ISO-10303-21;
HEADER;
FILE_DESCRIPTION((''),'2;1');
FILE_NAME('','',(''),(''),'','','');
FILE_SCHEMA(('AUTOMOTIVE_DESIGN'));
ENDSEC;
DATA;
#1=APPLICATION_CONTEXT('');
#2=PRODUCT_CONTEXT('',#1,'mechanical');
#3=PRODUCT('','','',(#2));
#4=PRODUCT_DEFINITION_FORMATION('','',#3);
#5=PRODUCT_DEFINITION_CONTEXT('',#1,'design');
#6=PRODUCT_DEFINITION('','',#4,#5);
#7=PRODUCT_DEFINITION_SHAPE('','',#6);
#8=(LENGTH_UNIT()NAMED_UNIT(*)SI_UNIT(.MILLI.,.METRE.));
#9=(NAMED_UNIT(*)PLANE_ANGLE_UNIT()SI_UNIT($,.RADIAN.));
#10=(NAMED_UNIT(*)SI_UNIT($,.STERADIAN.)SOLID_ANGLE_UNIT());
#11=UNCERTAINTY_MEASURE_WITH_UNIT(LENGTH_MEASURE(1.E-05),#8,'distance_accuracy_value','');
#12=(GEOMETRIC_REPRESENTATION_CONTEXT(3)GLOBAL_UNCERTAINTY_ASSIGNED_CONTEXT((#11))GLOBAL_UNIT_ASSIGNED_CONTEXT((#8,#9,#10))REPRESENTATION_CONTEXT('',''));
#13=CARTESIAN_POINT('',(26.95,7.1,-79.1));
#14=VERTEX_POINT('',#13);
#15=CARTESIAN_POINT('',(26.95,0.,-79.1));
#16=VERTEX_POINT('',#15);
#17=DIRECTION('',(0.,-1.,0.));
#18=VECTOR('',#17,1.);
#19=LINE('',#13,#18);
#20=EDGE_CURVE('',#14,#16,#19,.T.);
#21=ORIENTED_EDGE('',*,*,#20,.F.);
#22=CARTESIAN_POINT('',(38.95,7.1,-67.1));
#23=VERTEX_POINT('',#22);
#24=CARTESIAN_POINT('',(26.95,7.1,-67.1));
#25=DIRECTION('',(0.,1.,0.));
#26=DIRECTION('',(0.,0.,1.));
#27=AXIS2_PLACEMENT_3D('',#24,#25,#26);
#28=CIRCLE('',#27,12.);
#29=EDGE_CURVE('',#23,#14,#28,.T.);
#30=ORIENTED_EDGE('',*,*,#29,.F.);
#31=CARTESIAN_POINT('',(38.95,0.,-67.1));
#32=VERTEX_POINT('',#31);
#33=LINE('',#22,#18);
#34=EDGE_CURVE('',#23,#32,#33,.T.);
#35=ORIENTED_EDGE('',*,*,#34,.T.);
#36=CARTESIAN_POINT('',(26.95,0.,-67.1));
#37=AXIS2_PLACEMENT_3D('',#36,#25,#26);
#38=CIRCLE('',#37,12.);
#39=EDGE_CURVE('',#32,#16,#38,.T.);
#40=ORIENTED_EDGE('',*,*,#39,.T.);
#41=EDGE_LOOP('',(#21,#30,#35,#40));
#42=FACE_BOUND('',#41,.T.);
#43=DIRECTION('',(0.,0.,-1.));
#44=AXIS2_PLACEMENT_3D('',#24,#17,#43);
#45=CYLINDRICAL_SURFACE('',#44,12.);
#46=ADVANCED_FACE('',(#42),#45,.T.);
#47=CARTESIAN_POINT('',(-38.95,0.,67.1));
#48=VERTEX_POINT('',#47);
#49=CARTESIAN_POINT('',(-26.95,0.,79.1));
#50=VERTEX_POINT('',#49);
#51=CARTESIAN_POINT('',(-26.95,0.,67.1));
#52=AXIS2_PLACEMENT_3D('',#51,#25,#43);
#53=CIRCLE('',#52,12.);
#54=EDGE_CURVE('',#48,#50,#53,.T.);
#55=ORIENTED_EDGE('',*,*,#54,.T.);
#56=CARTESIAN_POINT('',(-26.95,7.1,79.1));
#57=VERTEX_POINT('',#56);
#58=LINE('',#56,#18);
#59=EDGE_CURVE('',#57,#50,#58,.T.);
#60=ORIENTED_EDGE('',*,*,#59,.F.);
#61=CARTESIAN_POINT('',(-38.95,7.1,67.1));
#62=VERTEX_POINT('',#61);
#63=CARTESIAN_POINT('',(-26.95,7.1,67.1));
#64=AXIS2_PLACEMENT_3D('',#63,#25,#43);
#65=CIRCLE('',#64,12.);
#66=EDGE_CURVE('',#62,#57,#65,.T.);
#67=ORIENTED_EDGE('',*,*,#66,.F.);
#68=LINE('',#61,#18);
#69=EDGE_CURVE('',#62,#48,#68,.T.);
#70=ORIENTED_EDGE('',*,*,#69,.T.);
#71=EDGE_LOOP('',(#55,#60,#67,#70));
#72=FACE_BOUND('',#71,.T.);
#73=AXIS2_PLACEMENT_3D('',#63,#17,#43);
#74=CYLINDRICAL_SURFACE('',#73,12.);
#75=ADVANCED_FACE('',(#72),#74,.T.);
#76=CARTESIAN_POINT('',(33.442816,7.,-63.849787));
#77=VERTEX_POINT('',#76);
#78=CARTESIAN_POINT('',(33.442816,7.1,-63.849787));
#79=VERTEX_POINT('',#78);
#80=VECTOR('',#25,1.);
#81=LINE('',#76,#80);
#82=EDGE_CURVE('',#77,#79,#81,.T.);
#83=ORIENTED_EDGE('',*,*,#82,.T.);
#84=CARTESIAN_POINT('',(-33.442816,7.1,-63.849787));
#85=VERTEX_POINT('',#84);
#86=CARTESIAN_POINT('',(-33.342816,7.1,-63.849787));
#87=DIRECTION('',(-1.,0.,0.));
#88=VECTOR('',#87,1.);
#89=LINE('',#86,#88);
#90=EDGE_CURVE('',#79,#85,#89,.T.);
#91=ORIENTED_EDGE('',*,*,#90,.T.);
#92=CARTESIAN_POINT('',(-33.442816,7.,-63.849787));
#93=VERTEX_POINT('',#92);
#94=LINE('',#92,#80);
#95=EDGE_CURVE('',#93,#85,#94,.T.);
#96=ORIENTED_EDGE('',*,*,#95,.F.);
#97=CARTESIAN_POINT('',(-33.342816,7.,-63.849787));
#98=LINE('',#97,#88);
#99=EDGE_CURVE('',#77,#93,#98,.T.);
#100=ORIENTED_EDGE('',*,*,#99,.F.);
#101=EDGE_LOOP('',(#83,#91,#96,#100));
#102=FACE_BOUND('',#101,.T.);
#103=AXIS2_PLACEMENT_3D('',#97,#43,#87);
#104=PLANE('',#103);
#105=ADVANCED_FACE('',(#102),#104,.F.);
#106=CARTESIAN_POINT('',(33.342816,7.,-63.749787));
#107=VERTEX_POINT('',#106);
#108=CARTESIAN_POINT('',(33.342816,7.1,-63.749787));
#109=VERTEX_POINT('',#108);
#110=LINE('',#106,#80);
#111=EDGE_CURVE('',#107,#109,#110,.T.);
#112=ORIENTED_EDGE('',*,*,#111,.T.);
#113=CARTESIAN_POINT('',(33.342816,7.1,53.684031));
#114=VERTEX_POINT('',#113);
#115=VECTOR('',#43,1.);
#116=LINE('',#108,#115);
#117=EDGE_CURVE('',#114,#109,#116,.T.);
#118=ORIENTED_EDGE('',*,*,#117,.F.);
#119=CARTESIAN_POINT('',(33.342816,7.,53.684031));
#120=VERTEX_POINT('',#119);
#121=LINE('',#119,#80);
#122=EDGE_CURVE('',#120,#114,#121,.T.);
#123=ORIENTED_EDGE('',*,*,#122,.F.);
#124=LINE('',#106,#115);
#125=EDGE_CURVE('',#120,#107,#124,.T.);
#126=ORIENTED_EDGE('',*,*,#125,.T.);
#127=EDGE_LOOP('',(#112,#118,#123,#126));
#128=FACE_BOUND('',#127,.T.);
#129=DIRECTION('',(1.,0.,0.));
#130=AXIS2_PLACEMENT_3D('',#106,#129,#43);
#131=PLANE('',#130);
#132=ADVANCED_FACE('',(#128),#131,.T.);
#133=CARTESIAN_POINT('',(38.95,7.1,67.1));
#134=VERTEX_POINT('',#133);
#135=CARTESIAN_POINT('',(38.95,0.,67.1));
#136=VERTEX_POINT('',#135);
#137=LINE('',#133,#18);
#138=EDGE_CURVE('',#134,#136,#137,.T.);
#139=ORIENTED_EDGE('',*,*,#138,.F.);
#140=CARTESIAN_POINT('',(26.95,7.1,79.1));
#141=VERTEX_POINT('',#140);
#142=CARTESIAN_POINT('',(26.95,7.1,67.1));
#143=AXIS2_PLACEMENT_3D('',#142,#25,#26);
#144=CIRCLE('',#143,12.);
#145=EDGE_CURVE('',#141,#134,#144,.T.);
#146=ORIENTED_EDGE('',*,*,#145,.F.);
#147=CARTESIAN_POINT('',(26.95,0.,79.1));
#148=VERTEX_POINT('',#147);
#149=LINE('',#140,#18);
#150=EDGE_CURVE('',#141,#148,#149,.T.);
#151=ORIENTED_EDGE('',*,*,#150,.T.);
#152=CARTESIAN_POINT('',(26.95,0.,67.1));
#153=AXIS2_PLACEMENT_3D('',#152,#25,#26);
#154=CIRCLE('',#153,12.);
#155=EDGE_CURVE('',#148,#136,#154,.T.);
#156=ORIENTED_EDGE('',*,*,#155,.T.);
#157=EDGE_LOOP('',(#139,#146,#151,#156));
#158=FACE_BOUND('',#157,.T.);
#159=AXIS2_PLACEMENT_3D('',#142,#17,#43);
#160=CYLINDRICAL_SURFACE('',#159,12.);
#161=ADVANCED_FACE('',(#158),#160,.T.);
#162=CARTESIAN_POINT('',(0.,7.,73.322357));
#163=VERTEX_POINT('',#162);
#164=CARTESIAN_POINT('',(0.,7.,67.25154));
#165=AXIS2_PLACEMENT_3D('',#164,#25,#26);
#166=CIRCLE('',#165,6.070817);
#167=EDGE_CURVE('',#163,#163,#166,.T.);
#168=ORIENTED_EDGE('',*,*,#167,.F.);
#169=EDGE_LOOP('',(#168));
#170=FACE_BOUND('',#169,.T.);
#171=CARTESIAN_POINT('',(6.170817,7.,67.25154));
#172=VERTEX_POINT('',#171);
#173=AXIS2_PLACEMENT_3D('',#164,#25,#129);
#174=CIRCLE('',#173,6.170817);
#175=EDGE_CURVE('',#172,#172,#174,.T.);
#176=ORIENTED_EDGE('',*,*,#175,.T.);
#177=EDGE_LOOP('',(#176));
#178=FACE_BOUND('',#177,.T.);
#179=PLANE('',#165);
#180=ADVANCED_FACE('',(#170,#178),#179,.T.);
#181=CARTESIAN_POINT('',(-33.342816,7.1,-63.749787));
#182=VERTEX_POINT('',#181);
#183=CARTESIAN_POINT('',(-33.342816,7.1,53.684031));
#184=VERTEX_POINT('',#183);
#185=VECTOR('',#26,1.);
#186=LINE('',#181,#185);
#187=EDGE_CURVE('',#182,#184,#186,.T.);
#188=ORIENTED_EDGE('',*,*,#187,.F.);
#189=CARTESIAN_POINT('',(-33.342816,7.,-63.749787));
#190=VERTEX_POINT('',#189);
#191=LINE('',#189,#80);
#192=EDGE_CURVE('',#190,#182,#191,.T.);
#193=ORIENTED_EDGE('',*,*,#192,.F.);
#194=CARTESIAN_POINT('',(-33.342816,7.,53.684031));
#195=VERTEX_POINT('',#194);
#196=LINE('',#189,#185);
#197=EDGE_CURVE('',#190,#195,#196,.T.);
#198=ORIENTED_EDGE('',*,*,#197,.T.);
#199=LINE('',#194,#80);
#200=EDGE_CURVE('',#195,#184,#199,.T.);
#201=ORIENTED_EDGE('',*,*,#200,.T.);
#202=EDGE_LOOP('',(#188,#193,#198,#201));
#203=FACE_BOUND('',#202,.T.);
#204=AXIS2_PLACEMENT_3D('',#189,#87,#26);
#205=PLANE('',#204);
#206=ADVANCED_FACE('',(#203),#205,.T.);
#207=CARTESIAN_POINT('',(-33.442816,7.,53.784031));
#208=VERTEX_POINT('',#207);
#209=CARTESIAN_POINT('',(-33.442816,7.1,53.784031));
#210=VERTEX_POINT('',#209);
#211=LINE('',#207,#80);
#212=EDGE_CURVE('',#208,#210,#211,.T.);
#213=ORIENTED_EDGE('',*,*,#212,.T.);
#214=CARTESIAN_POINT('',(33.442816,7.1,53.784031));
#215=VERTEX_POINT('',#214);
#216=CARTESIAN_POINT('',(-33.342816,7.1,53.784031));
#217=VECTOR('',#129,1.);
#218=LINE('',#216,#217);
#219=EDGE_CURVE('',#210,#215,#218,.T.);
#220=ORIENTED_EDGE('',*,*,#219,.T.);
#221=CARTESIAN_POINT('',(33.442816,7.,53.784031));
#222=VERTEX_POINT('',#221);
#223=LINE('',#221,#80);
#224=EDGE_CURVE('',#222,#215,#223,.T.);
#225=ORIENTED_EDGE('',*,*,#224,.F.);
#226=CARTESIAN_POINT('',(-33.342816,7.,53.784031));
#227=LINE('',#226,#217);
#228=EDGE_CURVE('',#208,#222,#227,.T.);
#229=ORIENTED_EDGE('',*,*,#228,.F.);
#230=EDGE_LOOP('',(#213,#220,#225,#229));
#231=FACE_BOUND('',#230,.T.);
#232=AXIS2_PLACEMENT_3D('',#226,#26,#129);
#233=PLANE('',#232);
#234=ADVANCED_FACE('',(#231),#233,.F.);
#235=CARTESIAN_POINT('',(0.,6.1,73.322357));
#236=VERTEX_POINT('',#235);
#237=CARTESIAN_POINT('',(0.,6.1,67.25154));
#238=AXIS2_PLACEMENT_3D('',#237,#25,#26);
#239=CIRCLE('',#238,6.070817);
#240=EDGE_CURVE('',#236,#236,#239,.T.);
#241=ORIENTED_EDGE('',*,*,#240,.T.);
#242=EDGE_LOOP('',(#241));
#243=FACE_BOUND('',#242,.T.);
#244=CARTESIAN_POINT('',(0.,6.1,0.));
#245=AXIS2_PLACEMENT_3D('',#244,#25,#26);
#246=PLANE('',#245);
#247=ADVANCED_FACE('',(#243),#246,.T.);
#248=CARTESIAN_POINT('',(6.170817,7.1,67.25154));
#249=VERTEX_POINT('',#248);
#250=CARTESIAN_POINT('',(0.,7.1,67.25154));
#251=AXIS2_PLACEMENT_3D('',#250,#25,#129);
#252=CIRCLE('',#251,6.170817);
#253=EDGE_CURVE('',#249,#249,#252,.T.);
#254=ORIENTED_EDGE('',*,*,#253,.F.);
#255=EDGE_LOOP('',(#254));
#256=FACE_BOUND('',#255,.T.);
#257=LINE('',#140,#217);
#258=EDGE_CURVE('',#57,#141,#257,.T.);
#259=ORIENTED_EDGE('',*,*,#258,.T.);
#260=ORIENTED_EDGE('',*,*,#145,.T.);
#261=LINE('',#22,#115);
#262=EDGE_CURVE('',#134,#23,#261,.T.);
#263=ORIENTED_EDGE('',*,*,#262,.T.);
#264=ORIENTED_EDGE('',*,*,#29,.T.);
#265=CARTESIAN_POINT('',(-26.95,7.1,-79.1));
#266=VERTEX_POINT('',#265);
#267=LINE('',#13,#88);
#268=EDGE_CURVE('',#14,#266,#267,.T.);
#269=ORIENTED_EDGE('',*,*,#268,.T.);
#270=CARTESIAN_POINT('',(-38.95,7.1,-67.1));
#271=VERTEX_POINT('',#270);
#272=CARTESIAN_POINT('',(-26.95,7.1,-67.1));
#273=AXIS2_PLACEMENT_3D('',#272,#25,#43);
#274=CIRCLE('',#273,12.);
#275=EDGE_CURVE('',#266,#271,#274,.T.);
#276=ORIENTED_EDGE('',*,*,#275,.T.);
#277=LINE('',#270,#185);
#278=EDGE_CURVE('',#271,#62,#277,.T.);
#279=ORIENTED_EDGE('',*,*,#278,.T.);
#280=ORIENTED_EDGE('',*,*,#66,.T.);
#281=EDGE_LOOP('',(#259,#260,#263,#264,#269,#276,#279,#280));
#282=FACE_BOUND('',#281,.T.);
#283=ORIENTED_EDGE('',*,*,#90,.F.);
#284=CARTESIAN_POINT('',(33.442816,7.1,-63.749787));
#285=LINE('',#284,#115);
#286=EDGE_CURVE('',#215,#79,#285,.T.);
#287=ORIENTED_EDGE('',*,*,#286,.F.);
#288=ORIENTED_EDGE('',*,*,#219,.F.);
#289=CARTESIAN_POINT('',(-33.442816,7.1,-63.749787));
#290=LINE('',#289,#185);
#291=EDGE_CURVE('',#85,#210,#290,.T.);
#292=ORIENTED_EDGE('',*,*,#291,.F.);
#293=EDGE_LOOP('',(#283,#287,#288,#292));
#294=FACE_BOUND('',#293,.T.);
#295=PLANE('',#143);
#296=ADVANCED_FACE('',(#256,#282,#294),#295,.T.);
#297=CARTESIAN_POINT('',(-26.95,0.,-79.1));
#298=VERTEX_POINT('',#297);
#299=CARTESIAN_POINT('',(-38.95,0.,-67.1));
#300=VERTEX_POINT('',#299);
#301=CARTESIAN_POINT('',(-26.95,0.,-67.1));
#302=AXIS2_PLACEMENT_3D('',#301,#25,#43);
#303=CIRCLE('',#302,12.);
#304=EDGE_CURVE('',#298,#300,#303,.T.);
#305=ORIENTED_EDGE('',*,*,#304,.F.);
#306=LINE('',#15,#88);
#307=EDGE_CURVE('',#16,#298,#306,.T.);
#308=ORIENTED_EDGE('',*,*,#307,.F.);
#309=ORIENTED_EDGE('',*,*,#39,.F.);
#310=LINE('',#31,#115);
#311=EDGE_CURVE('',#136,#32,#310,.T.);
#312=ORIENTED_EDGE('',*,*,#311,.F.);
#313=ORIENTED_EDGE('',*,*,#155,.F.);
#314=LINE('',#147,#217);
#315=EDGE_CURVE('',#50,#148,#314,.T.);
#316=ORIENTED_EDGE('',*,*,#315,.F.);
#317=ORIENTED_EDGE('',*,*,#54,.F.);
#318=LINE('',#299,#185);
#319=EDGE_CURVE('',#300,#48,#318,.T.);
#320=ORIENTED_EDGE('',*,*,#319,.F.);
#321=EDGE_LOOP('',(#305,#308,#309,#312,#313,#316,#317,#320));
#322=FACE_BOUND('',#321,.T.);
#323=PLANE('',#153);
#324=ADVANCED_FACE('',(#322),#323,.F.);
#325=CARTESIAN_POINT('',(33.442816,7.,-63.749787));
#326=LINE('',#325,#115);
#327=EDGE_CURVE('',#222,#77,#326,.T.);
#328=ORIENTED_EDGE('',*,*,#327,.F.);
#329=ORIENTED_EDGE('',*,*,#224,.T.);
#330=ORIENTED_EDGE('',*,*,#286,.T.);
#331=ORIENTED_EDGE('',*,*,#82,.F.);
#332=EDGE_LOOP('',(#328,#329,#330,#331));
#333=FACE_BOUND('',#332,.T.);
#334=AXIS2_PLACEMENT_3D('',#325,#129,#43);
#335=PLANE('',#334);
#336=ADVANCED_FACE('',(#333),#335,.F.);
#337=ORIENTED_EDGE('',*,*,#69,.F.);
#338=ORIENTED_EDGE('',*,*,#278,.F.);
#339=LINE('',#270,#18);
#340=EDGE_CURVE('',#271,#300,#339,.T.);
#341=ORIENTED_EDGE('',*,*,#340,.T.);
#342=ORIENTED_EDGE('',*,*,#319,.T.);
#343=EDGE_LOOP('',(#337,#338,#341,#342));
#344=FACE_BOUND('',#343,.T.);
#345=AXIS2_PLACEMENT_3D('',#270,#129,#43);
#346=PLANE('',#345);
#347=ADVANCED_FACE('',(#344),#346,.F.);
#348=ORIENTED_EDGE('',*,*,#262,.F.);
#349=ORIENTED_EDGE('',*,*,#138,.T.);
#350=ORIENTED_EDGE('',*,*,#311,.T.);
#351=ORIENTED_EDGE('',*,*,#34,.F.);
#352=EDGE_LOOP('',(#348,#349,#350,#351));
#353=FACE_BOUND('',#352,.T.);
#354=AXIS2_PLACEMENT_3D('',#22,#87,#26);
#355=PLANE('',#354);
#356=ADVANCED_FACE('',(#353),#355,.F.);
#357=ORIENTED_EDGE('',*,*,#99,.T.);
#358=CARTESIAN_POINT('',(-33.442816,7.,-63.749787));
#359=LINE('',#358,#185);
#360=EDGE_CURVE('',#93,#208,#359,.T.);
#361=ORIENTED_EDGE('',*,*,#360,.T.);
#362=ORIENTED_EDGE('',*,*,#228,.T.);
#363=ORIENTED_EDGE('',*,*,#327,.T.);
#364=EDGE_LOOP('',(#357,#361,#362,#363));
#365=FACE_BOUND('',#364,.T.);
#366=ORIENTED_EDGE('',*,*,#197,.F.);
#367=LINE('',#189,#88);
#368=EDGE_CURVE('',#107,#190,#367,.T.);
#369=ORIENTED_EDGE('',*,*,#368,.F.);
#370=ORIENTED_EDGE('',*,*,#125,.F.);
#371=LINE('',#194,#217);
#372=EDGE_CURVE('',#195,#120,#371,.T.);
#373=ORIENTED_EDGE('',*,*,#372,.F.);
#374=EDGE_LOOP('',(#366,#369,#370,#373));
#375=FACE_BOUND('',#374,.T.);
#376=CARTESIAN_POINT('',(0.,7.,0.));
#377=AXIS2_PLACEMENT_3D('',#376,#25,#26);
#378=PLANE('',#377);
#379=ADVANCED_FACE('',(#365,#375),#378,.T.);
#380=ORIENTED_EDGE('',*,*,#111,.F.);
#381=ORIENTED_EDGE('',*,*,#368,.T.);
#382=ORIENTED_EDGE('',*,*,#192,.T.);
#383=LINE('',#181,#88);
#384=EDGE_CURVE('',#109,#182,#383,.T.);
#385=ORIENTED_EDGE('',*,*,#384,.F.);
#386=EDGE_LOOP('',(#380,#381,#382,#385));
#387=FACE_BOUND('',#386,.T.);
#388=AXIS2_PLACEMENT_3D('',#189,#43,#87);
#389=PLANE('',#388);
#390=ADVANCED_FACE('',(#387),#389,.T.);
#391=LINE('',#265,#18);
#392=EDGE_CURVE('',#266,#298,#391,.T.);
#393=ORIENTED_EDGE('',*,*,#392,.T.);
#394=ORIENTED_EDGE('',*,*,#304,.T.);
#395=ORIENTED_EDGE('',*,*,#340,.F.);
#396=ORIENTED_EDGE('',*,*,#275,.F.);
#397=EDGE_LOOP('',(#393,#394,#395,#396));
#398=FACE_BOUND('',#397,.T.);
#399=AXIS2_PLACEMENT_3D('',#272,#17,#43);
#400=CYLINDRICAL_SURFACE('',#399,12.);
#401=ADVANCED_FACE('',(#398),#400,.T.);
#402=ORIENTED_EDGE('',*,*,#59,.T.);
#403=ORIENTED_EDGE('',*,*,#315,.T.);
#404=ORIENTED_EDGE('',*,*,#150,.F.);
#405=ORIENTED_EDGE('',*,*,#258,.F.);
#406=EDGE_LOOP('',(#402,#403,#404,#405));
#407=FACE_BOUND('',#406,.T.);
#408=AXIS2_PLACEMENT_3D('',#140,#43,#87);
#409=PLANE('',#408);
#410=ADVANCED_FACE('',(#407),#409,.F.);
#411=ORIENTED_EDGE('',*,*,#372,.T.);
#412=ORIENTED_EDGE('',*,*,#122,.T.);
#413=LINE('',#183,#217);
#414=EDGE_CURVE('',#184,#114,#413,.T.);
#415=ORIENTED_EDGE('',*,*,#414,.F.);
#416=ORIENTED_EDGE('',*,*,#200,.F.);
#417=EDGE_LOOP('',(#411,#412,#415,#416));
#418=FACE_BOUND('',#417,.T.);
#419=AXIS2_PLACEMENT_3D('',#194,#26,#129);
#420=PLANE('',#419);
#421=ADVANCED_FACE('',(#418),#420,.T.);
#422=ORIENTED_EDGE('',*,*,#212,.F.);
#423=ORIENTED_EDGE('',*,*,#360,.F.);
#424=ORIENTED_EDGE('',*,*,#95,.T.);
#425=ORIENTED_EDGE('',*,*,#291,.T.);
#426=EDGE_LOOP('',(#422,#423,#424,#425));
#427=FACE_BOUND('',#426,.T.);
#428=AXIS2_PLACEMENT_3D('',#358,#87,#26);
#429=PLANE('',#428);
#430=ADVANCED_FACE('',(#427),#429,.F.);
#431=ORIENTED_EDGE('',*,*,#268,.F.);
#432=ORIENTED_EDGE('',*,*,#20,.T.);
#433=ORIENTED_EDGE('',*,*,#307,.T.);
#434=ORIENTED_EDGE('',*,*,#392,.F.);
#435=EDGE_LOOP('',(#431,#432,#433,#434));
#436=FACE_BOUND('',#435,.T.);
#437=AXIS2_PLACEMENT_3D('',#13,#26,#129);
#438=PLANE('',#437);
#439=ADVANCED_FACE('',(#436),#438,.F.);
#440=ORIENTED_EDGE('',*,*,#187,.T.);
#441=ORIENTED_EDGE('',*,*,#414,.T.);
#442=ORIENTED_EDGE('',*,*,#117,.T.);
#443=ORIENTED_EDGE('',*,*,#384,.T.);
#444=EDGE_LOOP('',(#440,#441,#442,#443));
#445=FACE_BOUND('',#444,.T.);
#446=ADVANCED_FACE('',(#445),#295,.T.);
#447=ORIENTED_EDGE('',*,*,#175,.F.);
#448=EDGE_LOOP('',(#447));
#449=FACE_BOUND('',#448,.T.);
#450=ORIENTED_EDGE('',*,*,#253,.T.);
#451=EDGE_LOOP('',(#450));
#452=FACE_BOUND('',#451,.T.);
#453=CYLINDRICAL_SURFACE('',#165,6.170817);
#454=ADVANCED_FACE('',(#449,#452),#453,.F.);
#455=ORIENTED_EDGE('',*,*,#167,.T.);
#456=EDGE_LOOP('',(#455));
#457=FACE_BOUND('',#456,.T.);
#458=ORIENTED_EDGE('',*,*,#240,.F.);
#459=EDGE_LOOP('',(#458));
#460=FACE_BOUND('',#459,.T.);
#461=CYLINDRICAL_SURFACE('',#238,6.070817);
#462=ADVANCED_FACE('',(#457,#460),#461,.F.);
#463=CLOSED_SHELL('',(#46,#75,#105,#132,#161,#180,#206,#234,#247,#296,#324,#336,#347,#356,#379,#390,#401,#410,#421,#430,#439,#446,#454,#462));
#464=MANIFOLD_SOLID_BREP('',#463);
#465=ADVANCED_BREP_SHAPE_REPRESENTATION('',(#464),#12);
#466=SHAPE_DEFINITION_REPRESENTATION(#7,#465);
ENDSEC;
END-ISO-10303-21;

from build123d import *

# Parameters (mm, degrees)
EXTRUDE_1_DEPTH       = 7.1
SKETCH_2_R            = 6.07081667
CUT_EXTRUDE_1_DEPTH   = 1
SKETCH_2_4_R          = 6.17081667
SKETCH_2_4_R_2        = 6.07081667
SKETCH_2_4_W          = 66.885632048
SKETCH_2_4_H          = 117.633817445
SKETCH_2_4_W_2        = 66.685632048
SKETCH_2_4_H_2        = 117.433817445
CUT_EXTRUDE_1_2_DEPTH = 0.1


with BuildPart() as part:
    # Эскиз1 → Бобышка-Вытянуть1 (new body)
    with BuildSketch(Plane(origin=(0, 0, 0), x_dir=(1, 0, 0), z_dir=(0, 1, 0))):
        with BuildLine():
            Line((26.95, 79.1), (-26.95, 79.1))
            ThreePointArc((-26.95, 79.1), (-35.435281374, 75.585281374), (-38.95, 67.1))
            Line((-38.95, 67.1), (-38.95, -67.1))
            ThreePointArc((-38.95, -67.1), (-35.435281374, -75.585281374), (-26.95, -79.1))
            Line((-26.95, -79.1), (26.95, -79.1))
            ThreePointArc((26.95, -79.1), (35.435281374, -75.585281374), (38.95, -67.1))
            Line((38.95, -67.1), (38.95, 67.1))
            ThreePointArc((38.95, 67.1), (35.435281374, 75.585281374), (26.95, 79.1))
        make_face()
    extrude(amount=EXTRUDE_1_DEPTH)

    # Эскиз2 → Cut-Extrude 1 (cut)
    with BuildSketch(Plane(origin=(0, 7.1, 0), x_dir=(1, 0, 0), z_dir=(0, 1, 0))):
        with Locations((0, -67.251539846)):
            Circle(SKETCH_2_R)
    extrude(amount=-CUT_EXTRUDE_1_DEPTH, mode=Mode.SUBTRACT)

    # Эскиз2<4> → Cut-Extrude 1 2 (cut)
    # profile 1 of 2: a face of its own
    with BuildSketch(Plane(origin=(0, 7.1, 0), x_dir=(1, 0, 0), z_dir=(0, 1, 0))):
        with Locations((0, -67.251539846)):
            Circle(SKETCH_2_4_R)
        with Locations((0, -67.251539846)):
            Circle(SKETCH_2_4_R_2, mode=Mode.SUBTRACT)
    # profile 2 of 2: a face of its own
    with BuildSketch(Plane(origin=(0, 7.1, 0), x_dir=(1, 0, 0), z_dir=(0, 1, 0))):
        with Locations((0, 5.032877891)):
            Rectangle(SKETCH_2_4_W, SKETCH_2_4_H)
        with Locations((0, 5.032877891)):
            Rectangle(SKETCH_2_4_W_2, SKETCH_2_4_H_2, mode=Mode.SUBTRACT)
    extrude(amount=-CUT_EXTRUDE_1_2_DEPTH, mode=Mode.SUBTRACT)


solid = part.part
